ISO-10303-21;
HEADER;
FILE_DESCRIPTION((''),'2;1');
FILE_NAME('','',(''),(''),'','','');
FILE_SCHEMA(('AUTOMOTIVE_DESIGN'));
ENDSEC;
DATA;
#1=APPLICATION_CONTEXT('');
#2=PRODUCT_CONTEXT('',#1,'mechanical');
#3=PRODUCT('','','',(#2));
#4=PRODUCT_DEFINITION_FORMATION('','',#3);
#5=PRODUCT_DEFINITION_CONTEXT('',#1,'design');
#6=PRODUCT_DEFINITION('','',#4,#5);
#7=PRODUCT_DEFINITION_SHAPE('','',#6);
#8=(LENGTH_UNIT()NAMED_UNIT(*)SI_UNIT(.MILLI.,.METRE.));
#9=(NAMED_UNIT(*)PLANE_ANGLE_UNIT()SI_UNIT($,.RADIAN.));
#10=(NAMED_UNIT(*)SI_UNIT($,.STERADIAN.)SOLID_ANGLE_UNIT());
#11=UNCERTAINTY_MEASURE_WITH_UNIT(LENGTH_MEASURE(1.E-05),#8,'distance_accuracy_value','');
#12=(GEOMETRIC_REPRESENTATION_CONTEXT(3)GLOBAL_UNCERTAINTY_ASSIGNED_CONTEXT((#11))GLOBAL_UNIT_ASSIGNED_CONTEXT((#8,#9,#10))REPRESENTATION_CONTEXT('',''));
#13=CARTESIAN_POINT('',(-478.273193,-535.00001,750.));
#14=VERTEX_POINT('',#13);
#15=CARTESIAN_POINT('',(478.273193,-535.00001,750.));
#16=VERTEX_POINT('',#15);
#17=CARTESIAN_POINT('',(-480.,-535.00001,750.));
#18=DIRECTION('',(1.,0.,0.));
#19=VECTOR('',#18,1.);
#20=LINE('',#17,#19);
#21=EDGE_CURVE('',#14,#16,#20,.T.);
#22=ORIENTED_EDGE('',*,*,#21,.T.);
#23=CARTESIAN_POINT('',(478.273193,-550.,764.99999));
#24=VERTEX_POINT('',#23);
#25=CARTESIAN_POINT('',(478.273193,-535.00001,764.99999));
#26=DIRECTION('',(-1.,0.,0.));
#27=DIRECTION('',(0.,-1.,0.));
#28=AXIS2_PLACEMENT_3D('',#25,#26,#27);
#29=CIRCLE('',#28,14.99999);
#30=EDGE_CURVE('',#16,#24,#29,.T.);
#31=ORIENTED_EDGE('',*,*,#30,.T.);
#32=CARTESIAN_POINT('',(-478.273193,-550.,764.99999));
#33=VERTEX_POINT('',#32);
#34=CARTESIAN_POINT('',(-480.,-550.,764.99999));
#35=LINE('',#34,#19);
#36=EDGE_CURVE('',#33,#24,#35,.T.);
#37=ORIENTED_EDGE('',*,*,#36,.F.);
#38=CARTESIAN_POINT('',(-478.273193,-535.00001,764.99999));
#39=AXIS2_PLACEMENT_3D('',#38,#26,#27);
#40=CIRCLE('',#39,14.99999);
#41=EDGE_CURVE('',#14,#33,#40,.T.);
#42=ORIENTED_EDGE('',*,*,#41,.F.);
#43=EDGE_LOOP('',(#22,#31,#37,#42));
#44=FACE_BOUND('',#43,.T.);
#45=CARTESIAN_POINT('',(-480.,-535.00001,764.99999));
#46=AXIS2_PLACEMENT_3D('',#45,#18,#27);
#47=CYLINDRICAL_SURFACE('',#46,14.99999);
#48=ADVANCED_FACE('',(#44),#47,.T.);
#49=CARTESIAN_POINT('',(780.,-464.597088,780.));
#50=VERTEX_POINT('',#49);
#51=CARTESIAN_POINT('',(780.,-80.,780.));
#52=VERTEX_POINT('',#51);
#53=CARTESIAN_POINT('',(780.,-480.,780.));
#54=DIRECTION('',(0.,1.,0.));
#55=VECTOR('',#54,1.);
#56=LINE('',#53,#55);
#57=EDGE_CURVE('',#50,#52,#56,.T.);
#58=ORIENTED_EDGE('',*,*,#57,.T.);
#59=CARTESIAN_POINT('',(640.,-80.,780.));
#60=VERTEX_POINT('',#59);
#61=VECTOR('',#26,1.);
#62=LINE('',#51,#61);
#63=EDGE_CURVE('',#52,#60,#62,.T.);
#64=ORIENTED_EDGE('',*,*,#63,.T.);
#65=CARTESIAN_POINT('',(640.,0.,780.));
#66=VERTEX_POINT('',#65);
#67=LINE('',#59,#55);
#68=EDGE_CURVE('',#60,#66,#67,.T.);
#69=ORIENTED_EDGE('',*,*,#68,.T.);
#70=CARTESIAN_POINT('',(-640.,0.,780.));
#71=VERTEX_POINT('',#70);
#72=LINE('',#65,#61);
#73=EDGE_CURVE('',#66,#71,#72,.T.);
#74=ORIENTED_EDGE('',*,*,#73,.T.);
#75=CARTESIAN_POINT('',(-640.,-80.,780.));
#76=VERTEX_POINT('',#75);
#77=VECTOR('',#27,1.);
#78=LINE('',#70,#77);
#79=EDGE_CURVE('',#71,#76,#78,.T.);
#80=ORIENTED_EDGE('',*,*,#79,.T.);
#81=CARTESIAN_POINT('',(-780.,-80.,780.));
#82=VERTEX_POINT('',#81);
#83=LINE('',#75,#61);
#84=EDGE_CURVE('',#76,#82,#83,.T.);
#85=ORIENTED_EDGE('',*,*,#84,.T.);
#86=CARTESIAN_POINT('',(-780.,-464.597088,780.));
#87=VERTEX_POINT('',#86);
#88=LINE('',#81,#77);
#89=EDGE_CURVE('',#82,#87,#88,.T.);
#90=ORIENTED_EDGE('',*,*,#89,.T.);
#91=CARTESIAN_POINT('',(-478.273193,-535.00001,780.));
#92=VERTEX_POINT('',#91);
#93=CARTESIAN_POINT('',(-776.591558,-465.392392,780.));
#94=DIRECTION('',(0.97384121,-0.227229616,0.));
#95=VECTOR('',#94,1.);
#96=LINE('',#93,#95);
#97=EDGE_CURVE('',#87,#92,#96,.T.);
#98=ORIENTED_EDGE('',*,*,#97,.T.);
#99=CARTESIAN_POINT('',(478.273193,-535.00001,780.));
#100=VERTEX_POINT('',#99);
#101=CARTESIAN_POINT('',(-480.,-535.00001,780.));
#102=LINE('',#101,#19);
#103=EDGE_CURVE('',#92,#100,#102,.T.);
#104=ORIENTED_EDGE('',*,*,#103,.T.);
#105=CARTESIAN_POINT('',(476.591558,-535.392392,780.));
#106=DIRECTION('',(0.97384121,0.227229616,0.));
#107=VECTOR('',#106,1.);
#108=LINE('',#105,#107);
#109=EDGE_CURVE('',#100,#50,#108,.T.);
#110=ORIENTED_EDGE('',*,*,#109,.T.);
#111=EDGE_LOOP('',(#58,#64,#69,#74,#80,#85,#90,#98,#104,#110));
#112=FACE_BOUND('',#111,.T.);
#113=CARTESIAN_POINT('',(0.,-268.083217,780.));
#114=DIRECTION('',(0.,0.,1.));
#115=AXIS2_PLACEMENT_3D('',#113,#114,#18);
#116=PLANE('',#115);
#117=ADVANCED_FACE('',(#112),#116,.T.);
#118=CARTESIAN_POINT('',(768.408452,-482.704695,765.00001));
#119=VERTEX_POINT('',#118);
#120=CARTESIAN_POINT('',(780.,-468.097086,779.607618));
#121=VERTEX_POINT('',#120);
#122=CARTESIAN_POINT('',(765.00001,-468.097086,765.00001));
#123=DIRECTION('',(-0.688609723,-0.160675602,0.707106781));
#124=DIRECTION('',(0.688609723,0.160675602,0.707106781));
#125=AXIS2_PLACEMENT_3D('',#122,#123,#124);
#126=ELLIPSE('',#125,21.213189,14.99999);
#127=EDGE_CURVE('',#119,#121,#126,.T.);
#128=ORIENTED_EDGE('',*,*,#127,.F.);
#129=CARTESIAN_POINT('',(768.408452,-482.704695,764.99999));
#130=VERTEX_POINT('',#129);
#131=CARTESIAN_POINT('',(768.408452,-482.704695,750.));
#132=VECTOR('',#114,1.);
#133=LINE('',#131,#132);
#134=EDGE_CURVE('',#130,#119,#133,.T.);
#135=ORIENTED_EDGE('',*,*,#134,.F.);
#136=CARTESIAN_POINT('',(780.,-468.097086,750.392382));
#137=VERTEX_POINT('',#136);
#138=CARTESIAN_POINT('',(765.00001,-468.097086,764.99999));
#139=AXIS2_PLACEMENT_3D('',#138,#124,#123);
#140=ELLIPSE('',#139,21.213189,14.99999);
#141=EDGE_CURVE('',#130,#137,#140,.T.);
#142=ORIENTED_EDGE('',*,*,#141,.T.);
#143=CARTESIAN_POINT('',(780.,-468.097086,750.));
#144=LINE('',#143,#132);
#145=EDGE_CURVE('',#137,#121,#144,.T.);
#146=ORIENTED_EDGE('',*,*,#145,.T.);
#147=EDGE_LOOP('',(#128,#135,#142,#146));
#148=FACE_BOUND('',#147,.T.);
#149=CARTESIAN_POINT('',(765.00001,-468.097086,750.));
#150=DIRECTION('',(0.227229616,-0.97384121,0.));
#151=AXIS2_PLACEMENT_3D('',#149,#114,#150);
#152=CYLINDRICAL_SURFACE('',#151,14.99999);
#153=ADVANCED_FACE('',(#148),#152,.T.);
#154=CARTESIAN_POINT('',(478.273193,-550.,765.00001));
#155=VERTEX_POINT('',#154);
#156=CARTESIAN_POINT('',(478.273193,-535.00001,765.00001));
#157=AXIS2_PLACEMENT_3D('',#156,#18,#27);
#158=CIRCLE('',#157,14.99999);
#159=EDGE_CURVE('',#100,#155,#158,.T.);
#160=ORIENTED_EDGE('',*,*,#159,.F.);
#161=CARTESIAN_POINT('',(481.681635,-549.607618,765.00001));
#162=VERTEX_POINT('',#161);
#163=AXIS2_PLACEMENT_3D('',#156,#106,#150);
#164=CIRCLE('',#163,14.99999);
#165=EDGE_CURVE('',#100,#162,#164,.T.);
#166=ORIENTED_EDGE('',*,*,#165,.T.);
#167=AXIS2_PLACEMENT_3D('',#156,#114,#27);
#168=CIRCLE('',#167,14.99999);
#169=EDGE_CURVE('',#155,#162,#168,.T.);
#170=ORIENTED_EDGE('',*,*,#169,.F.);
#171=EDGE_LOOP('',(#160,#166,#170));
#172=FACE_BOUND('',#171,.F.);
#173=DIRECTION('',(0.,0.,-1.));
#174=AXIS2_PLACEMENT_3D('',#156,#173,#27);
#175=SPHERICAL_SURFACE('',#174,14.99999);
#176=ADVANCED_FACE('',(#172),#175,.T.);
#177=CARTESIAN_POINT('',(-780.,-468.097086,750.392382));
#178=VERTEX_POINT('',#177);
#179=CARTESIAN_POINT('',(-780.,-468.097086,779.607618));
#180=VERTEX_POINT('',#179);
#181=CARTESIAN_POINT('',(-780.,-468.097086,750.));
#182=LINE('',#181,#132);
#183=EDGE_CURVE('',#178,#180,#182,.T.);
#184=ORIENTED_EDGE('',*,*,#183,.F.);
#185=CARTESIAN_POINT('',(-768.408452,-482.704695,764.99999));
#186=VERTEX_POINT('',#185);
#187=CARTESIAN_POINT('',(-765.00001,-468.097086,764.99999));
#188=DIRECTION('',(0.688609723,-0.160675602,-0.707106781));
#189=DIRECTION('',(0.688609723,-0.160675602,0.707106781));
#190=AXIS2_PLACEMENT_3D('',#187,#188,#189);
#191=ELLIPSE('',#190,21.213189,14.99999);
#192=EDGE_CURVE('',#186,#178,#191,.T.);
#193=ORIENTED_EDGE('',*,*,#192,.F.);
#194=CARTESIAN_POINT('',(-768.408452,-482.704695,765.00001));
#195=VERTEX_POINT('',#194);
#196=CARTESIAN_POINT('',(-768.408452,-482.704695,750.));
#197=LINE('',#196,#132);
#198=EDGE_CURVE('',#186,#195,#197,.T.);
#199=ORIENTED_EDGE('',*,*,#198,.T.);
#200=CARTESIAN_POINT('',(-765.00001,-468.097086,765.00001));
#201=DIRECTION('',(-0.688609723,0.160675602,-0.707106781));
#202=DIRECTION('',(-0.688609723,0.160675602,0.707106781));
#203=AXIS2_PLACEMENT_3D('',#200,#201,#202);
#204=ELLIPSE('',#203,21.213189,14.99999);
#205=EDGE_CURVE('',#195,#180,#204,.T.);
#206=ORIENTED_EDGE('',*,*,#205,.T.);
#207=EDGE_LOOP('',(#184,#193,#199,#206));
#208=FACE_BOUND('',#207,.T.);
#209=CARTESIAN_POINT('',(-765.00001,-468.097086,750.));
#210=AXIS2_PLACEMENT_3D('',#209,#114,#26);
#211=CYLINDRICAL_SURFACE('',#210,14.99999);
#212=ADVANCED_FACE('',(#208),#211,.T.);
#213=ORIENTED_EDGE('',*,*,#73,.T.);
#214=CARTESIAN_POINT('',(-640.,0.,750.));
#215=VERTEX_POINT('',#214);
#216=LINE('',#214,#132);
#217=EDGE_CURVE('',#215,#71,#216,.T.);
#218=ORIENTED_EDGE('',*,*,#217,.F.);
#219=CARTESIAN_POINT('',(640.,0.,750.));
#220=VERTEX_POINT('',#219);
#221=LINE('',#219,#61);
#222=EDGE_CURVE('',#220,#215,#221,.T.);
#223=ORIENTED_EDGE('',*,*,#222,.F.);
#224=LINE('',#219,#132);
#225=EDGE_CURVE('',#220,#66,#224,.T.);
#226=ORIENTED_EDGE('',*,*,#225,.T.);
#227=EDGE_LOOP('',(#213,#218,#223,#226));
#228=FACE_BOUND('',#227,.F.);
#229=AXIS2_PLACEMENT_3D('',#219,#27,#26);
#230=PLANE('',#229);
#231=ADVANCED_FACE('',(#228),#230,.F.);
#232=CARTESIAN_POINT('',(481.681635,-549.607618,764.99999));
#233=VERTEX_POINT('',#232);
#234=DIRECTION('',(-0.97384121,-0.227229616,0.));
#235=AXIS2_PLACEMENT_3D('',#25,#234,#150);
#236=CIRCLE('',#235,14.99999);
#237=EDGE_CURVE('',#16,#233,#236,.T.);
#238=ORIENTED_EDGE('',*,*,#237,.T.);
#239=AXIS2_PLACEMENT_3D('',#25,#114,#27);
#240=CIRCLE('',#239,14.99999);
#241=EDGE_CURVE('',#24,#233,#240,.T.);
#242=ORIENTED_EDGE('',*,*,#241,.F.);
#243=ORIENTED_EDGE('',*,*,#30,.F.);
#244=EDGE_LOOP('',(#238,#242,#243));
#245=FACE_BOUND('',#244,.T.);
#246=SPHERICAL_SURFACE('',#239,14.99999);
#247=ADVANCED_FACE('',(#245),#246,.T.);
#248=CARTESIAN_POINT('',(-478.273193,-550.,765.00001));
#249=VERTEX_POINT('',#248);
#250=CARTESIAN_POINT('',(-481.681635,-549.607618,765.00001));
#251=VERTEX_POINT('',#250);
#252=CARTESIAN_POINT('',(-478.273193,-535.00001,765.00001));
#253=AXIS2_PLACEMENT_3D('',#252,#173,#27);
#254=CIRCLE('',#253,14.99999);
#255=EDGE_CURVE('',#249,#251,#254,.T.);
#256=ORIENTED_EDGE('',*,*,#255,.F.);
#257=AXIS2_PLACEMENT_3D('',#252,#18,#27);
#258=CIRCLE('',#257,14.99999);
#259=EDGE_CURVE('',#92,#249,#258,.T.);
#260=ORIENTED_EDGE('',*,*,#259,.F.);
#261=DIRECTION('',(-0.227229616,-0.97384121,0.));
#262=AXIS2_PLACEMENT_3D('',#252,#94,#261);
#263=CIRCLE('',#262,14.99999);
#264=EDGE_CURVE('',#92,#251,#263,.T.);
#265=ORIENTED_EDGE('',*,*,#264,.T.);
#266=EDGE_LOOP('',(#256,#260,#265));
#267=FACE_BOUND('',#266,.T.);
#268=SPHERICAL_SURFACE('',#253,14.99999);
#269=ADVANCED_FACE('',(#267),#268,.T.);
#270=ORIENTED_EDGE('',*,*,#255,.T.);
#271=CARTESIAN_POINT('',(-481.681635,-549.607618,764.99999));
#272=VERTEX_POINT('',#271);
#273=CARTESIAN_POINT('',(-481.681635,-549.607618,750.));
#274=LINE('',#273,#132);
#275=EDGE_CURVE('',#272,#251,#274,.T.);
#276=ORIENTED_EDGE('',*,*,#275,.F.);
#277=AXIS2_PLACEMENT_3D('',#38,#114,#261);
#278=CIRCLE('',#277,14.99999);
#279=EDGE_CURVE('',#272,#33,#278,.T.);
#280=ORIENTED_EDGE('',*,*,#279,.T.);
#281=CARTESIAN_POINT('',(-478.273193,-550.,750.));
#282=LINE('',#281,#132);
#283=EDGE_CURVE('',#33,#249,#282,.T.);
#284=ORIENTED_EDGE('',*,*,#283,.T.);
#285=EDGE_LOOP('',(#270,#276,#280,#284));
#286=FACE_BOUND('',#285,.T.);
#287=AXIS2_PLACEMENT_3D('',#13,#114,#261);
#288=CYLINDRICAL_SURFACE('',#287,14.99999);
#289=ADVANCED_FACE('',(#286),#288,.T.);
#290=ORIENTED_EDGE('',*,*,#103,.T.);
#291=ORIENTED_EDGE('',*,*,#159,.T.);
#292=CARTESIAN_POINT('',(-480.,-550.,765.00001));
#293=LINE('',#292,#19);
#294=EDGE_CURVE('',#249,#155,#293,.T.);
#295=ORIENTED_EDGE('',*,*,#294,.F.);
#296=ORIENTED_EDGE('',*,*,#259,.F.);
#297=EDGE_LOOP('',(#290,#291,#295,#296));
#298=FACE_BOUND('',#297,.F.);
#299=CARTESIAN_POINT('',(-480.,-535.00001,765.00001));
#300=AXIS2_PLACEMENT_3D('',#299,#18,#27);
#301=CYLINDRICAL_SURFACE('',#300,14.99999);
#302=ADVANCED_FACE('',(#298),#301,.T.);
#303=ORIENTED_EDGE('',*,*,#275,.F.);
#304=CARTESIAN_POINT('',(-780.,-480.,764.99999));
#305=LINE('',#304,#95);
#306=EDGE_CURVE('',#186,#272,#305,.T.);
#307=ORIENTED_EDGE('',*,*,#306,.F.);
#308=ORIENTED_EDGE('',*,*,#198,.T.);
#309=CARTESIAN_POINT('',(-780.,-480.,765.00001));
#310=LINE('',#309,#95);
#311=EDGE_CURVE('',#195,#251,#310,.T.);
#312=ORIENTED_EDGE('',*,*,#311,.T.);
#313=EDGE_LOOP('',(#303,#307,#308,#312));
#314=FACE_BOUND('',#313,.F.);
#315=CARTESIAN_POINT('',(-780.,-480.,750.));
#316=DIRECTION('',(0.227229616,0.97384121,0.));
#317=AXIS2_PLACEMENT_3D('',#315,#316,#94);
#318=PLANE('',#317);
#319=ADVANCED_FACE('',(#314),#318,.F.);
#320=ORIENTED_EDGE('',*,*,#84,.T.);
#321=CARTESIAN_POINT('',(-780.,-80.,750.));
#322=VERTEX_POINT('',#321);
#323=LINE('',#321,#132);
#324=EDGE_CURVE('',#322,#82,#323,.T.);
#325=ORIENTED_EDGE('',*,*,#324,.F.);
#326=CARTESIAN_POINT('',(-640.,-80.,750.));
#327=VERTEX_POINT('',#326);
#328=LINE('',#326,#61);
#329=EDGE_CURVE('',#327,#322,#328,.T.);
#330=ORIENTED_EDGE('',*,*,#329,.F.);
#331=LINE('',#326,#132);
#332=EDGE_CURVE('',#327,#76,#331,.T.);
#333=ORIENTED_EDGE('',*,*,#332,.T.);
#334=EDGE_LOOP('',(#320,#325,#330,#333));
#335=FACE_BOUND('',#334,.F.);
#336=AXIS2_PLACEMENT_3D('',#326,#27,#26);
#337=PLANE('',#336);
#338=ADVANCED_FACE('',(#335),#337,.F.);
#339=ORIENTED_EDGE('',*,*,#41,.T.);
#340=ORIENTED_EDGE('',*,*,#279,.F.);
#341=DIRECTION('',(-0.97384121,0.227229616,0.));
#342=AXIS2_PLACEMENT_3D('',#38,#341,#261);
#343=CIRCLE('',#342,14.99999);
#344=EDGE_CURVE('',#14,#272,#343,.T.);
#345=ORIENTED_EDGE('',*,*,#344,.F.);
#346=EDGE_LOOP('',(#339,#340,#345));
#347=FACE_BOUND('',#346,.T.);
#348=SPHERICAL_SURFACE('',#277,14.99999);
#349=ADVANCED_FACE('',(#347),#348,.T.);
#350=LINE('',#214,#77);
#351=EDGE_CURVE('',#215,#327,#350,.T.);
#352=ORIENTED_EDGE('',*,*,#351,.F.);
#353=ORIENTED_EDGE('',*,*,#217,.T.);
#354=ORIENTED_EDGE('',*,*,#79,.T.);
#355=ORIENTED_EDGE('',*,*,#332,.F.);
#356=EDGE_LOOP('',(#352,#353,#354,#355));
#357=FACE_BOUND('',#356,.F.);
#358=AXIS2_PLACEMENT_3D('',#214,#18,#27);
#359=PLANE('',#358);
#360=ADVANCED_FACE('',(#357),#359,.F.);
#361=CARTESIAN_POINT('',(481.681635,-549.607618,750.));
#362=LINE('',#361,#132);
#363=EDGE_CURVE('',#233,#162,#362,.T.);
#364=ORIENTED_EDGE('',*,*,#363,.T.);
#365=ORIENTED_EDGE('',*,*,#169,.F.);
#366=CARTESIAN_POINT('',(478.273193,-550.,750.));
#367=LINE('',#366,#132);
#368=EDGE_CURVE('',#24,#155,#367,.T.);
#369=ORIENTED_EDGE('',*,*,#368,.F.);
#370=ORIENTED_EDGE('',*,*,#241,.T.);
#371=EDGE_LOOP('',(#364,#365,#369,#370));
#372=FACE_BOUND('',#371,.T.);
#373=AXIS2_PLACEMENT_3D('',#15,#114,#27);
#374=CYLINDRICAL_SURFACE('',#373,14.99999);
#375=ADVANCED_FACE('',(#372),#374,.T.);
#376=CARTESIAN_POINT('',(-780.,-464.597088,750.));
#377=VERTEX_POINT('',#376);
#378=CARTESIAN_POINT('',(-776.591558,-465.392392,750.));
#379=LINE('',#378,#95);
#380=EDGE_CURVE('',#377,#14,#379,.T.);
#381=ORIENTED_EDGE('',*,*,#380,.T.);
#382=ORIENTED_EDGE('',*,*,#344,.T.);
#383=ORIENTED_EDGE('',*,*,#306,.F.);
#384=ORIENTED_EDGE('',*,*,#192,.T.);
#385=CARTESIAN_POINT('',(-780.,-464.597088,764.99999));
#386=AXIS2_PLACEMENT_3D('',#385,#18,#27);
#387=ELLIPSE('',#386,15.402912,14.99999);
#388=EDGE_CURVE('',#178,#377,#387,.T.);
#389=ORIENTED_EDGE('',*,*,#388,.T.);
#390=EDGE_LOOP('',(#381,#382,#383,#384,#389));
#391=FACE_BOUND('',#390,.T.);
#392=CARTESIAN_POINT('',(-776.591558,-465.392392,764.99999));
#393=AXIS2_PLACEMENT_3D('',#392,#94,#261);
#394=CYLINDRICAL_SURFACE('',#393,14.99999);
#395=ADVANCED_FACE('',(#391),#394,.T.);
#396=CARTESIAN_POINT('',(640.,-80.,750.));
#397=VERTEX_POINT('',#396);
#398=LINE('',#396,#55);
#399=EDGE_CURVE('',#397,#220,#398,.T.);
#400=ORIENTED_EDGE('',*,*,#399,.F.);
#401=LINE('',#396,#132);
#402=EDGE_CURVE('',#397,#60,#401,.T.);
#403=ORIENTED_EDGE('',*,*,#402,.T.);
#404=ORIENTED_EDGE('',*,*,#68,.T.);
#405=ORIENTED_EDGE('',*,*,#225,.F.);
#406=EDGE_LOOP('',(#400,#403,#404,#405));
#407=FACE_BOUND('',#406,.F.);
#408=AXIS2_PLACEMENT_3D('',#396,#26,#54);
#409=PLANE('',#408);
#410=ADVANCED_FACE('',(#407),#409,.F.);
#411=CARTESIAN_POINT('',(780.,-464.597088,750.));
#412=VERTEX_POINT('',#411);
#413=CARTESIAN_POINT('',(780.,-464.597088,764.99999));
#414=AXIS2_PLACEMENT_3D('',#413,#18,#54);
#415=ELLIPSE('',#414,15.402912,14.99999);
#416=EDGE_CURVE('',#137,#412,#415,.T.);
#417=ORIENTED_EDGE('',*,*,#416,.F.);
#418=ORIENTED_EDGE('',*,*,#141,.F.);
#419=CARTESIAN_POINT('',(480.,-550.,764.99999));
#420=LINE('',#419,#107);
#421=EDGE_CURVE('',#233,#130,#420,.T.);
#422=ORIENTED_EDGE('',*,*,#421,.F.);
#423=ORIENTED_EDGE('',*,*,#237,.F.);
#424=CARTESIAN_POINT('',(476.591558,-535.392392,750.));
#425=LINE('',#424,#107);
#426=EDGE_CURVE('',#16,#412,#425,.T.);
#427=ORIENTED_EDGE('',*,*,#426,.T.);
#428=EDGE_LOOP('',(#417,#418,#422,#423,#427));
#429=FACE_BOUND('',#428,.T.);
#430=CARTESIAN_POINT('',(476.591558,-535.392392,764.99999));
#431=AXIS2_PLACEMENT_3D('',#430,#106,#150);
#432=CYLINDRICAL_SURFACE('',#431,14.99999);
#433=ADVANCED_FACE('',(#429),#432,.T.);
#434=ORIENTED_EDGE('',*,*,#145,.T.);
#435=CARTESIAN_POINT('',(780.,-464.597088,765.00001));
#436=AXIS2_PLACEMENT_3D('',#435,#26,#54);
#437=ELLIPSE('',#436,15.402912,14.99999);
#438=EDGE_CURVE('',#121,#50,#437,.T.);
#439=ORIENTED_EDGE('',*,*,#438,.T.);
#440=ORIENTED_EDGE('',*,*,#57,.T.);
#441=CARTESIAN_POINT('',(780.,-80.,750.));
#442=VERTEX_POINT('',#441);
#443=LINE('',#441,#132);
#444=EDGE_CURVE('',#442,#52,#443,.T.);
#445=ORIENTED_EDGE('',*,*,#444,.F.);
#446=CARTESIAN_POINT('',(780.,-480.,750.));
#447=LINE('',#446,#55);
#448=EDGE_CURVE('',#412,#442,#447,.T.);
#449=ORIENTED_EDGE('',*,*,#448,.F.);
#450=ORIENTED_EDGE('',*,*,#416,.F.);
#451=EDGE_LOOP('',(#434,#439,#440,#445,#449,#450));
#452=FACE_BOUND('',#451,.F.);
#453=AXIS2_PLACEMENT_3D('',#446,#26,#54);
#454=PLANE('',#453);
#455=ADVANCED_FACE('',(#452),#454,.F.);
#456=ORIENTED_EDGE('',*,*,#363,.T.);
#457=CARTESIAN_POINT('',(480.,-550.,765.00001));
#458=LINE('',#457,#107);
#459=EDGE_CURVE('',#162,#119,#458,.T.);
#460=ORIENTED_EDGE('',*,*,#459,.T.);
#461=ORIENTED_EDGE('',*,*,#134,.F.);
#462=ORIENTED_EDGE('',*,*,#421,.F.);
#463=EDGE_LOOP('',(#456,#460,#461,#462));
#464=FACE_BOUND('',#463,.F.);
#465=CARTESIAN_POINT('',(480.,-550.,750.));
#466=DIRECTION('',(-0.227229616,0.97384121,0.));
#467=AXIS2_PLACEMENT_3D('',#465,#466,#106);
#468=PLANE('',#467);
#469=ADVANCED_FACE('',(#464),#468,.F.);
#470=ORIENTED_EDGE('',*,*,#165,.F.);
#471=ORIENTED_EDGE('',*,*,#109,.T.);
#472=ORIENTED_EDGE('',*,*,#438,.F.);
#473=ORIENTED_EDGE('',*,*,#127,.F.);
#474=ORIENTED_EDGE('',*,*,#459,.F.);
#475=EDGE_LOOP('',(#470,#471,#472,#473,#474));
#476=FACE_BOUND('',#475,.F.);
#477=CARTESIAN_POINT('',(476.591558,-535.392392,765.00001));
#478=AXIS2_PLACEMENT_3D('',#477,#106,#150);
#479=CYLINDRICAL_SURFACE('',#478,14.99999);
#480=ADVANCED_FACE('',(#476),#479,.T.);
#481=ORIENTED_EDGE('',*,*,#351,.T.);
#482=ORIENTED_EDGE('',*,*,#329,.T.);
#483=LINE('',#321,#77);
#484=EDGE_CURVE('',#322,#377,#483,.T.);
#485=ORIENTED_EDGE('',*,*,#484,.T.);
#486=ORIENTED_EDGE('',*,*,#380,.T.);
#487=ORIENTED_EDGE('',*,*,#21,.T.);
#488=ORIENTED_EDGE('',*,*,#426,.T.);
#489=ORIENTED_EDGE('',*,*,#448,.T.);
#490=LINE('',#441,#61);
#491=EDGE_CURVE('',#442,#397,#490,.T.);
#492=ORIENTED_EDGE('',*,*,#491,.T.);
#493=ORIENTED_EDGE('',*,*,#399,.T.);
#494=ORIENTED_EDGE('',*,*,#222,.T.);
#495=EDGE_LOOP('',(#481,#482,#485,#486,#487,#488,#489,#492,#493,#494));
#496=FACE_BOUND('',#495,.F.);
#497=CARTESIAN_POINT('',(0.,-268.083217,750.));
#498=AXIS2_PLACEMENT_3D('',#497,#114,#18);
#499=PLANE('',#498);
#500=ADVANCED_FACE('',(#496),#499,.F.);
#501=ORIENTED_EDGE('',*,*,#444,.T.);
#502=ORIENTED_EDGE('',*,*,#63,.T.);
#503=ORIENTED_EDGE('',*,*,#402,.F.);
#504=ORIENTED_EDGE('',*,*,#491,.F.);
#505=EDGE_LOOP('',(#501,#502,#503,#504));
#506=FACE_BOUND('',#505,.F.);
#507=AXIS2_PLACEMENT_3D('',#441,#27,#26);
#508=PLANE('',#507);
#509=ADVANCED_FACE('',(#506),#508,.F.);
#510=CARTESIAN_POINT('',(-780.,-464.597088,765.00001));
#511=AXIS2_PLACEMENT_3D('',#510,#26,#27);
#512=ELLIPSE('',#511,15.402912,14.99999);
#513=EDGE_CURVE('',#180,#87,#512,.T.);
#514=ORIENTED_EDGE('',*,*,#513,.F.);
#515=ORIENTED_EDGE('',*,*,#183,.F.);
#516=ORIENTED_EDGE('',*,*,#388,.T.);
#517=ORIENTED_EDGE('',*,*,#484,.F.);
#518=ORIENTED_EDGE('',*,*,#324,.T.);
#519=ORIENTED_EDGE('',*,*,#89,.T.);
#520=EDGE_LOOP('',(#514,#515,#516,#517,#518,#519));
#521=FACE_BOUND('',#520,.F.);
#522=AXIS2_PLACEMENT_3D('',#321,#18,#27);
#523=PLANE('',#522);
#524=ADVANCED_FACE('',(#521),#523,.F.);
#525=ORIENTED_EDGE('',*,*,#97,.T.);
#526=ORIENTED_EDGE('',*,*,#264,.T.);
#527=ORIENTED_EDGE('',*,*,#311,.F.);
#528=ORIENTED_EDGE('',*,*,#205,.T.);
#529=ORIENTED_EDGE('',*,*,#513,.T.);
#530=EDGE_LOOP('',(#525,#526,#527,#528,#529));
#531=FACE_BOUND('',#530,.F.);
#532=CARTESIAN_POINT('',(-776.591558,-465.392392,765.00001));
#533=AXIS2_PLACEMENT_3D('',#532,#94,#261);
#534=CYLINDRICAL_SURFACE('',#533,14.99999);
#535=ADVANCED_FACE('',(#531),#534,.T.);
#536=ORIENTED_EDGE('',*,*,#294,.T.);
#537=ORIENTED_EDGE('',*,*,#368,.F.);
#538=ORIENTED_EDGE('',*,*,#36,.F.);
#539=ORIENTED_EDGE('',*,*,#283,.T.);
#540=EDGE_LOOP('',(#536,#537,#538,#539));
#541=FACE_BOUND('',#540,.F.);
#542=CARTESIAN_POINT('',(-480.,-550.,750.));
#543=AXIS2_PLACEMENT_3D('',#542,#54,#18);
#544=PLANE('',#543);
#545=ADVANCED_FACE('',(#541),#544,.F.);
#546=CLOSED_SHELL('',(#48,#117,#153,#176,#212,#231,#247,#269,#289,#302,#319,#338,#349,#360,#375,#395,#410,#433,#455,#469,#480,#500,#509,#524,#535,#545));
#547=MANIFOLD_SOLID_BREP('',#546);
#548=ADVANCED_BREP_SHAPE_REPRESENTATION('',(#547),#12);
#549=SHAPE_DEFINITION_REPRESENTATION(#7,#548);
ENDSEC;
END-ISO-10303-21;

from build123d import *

# Parameters (mm, degrees)
F2_DEPTH = 30
F3_R     = 14.99999


# Not quite as in the source:
# - a fillet or chamfer is up to 0.001 mm smaller than in the source, because OpenCascade refuses the exact size


with BuildPart() as f2:
    # F1 (on offset) → F2 (new body)
    with BuildSketch(Plane.XY.offset(750)):
        Polygon((640, 0), (-640, 0), (-640, -80), (-780, -80), (-780, -480), (-480, -550), (480, -550), (780, -480), (780, -80), (640, -80), align=None)
    extrude(amount=F2_DEPTH)

    # F3 (radius 15 in the source; OpenCascade refuses exactly that, so slightly less here)
    f3_edges = [f2.edges().sort_by_distance(p)[0] for p in [
        (-630, -515, 780),
        (-780, -480, 765),
        (-480, -550, 765),
        (-630, -515, 750),
        (480, -550, 765),
        (0, -550, 750),
        (0, -550, 780),
        (780, -480, 765),
        (630, -515, 750),
        (630, -515, 780),
    ]]
    fillet(f3_edges, radius=F3_R)


solid = f2.part
